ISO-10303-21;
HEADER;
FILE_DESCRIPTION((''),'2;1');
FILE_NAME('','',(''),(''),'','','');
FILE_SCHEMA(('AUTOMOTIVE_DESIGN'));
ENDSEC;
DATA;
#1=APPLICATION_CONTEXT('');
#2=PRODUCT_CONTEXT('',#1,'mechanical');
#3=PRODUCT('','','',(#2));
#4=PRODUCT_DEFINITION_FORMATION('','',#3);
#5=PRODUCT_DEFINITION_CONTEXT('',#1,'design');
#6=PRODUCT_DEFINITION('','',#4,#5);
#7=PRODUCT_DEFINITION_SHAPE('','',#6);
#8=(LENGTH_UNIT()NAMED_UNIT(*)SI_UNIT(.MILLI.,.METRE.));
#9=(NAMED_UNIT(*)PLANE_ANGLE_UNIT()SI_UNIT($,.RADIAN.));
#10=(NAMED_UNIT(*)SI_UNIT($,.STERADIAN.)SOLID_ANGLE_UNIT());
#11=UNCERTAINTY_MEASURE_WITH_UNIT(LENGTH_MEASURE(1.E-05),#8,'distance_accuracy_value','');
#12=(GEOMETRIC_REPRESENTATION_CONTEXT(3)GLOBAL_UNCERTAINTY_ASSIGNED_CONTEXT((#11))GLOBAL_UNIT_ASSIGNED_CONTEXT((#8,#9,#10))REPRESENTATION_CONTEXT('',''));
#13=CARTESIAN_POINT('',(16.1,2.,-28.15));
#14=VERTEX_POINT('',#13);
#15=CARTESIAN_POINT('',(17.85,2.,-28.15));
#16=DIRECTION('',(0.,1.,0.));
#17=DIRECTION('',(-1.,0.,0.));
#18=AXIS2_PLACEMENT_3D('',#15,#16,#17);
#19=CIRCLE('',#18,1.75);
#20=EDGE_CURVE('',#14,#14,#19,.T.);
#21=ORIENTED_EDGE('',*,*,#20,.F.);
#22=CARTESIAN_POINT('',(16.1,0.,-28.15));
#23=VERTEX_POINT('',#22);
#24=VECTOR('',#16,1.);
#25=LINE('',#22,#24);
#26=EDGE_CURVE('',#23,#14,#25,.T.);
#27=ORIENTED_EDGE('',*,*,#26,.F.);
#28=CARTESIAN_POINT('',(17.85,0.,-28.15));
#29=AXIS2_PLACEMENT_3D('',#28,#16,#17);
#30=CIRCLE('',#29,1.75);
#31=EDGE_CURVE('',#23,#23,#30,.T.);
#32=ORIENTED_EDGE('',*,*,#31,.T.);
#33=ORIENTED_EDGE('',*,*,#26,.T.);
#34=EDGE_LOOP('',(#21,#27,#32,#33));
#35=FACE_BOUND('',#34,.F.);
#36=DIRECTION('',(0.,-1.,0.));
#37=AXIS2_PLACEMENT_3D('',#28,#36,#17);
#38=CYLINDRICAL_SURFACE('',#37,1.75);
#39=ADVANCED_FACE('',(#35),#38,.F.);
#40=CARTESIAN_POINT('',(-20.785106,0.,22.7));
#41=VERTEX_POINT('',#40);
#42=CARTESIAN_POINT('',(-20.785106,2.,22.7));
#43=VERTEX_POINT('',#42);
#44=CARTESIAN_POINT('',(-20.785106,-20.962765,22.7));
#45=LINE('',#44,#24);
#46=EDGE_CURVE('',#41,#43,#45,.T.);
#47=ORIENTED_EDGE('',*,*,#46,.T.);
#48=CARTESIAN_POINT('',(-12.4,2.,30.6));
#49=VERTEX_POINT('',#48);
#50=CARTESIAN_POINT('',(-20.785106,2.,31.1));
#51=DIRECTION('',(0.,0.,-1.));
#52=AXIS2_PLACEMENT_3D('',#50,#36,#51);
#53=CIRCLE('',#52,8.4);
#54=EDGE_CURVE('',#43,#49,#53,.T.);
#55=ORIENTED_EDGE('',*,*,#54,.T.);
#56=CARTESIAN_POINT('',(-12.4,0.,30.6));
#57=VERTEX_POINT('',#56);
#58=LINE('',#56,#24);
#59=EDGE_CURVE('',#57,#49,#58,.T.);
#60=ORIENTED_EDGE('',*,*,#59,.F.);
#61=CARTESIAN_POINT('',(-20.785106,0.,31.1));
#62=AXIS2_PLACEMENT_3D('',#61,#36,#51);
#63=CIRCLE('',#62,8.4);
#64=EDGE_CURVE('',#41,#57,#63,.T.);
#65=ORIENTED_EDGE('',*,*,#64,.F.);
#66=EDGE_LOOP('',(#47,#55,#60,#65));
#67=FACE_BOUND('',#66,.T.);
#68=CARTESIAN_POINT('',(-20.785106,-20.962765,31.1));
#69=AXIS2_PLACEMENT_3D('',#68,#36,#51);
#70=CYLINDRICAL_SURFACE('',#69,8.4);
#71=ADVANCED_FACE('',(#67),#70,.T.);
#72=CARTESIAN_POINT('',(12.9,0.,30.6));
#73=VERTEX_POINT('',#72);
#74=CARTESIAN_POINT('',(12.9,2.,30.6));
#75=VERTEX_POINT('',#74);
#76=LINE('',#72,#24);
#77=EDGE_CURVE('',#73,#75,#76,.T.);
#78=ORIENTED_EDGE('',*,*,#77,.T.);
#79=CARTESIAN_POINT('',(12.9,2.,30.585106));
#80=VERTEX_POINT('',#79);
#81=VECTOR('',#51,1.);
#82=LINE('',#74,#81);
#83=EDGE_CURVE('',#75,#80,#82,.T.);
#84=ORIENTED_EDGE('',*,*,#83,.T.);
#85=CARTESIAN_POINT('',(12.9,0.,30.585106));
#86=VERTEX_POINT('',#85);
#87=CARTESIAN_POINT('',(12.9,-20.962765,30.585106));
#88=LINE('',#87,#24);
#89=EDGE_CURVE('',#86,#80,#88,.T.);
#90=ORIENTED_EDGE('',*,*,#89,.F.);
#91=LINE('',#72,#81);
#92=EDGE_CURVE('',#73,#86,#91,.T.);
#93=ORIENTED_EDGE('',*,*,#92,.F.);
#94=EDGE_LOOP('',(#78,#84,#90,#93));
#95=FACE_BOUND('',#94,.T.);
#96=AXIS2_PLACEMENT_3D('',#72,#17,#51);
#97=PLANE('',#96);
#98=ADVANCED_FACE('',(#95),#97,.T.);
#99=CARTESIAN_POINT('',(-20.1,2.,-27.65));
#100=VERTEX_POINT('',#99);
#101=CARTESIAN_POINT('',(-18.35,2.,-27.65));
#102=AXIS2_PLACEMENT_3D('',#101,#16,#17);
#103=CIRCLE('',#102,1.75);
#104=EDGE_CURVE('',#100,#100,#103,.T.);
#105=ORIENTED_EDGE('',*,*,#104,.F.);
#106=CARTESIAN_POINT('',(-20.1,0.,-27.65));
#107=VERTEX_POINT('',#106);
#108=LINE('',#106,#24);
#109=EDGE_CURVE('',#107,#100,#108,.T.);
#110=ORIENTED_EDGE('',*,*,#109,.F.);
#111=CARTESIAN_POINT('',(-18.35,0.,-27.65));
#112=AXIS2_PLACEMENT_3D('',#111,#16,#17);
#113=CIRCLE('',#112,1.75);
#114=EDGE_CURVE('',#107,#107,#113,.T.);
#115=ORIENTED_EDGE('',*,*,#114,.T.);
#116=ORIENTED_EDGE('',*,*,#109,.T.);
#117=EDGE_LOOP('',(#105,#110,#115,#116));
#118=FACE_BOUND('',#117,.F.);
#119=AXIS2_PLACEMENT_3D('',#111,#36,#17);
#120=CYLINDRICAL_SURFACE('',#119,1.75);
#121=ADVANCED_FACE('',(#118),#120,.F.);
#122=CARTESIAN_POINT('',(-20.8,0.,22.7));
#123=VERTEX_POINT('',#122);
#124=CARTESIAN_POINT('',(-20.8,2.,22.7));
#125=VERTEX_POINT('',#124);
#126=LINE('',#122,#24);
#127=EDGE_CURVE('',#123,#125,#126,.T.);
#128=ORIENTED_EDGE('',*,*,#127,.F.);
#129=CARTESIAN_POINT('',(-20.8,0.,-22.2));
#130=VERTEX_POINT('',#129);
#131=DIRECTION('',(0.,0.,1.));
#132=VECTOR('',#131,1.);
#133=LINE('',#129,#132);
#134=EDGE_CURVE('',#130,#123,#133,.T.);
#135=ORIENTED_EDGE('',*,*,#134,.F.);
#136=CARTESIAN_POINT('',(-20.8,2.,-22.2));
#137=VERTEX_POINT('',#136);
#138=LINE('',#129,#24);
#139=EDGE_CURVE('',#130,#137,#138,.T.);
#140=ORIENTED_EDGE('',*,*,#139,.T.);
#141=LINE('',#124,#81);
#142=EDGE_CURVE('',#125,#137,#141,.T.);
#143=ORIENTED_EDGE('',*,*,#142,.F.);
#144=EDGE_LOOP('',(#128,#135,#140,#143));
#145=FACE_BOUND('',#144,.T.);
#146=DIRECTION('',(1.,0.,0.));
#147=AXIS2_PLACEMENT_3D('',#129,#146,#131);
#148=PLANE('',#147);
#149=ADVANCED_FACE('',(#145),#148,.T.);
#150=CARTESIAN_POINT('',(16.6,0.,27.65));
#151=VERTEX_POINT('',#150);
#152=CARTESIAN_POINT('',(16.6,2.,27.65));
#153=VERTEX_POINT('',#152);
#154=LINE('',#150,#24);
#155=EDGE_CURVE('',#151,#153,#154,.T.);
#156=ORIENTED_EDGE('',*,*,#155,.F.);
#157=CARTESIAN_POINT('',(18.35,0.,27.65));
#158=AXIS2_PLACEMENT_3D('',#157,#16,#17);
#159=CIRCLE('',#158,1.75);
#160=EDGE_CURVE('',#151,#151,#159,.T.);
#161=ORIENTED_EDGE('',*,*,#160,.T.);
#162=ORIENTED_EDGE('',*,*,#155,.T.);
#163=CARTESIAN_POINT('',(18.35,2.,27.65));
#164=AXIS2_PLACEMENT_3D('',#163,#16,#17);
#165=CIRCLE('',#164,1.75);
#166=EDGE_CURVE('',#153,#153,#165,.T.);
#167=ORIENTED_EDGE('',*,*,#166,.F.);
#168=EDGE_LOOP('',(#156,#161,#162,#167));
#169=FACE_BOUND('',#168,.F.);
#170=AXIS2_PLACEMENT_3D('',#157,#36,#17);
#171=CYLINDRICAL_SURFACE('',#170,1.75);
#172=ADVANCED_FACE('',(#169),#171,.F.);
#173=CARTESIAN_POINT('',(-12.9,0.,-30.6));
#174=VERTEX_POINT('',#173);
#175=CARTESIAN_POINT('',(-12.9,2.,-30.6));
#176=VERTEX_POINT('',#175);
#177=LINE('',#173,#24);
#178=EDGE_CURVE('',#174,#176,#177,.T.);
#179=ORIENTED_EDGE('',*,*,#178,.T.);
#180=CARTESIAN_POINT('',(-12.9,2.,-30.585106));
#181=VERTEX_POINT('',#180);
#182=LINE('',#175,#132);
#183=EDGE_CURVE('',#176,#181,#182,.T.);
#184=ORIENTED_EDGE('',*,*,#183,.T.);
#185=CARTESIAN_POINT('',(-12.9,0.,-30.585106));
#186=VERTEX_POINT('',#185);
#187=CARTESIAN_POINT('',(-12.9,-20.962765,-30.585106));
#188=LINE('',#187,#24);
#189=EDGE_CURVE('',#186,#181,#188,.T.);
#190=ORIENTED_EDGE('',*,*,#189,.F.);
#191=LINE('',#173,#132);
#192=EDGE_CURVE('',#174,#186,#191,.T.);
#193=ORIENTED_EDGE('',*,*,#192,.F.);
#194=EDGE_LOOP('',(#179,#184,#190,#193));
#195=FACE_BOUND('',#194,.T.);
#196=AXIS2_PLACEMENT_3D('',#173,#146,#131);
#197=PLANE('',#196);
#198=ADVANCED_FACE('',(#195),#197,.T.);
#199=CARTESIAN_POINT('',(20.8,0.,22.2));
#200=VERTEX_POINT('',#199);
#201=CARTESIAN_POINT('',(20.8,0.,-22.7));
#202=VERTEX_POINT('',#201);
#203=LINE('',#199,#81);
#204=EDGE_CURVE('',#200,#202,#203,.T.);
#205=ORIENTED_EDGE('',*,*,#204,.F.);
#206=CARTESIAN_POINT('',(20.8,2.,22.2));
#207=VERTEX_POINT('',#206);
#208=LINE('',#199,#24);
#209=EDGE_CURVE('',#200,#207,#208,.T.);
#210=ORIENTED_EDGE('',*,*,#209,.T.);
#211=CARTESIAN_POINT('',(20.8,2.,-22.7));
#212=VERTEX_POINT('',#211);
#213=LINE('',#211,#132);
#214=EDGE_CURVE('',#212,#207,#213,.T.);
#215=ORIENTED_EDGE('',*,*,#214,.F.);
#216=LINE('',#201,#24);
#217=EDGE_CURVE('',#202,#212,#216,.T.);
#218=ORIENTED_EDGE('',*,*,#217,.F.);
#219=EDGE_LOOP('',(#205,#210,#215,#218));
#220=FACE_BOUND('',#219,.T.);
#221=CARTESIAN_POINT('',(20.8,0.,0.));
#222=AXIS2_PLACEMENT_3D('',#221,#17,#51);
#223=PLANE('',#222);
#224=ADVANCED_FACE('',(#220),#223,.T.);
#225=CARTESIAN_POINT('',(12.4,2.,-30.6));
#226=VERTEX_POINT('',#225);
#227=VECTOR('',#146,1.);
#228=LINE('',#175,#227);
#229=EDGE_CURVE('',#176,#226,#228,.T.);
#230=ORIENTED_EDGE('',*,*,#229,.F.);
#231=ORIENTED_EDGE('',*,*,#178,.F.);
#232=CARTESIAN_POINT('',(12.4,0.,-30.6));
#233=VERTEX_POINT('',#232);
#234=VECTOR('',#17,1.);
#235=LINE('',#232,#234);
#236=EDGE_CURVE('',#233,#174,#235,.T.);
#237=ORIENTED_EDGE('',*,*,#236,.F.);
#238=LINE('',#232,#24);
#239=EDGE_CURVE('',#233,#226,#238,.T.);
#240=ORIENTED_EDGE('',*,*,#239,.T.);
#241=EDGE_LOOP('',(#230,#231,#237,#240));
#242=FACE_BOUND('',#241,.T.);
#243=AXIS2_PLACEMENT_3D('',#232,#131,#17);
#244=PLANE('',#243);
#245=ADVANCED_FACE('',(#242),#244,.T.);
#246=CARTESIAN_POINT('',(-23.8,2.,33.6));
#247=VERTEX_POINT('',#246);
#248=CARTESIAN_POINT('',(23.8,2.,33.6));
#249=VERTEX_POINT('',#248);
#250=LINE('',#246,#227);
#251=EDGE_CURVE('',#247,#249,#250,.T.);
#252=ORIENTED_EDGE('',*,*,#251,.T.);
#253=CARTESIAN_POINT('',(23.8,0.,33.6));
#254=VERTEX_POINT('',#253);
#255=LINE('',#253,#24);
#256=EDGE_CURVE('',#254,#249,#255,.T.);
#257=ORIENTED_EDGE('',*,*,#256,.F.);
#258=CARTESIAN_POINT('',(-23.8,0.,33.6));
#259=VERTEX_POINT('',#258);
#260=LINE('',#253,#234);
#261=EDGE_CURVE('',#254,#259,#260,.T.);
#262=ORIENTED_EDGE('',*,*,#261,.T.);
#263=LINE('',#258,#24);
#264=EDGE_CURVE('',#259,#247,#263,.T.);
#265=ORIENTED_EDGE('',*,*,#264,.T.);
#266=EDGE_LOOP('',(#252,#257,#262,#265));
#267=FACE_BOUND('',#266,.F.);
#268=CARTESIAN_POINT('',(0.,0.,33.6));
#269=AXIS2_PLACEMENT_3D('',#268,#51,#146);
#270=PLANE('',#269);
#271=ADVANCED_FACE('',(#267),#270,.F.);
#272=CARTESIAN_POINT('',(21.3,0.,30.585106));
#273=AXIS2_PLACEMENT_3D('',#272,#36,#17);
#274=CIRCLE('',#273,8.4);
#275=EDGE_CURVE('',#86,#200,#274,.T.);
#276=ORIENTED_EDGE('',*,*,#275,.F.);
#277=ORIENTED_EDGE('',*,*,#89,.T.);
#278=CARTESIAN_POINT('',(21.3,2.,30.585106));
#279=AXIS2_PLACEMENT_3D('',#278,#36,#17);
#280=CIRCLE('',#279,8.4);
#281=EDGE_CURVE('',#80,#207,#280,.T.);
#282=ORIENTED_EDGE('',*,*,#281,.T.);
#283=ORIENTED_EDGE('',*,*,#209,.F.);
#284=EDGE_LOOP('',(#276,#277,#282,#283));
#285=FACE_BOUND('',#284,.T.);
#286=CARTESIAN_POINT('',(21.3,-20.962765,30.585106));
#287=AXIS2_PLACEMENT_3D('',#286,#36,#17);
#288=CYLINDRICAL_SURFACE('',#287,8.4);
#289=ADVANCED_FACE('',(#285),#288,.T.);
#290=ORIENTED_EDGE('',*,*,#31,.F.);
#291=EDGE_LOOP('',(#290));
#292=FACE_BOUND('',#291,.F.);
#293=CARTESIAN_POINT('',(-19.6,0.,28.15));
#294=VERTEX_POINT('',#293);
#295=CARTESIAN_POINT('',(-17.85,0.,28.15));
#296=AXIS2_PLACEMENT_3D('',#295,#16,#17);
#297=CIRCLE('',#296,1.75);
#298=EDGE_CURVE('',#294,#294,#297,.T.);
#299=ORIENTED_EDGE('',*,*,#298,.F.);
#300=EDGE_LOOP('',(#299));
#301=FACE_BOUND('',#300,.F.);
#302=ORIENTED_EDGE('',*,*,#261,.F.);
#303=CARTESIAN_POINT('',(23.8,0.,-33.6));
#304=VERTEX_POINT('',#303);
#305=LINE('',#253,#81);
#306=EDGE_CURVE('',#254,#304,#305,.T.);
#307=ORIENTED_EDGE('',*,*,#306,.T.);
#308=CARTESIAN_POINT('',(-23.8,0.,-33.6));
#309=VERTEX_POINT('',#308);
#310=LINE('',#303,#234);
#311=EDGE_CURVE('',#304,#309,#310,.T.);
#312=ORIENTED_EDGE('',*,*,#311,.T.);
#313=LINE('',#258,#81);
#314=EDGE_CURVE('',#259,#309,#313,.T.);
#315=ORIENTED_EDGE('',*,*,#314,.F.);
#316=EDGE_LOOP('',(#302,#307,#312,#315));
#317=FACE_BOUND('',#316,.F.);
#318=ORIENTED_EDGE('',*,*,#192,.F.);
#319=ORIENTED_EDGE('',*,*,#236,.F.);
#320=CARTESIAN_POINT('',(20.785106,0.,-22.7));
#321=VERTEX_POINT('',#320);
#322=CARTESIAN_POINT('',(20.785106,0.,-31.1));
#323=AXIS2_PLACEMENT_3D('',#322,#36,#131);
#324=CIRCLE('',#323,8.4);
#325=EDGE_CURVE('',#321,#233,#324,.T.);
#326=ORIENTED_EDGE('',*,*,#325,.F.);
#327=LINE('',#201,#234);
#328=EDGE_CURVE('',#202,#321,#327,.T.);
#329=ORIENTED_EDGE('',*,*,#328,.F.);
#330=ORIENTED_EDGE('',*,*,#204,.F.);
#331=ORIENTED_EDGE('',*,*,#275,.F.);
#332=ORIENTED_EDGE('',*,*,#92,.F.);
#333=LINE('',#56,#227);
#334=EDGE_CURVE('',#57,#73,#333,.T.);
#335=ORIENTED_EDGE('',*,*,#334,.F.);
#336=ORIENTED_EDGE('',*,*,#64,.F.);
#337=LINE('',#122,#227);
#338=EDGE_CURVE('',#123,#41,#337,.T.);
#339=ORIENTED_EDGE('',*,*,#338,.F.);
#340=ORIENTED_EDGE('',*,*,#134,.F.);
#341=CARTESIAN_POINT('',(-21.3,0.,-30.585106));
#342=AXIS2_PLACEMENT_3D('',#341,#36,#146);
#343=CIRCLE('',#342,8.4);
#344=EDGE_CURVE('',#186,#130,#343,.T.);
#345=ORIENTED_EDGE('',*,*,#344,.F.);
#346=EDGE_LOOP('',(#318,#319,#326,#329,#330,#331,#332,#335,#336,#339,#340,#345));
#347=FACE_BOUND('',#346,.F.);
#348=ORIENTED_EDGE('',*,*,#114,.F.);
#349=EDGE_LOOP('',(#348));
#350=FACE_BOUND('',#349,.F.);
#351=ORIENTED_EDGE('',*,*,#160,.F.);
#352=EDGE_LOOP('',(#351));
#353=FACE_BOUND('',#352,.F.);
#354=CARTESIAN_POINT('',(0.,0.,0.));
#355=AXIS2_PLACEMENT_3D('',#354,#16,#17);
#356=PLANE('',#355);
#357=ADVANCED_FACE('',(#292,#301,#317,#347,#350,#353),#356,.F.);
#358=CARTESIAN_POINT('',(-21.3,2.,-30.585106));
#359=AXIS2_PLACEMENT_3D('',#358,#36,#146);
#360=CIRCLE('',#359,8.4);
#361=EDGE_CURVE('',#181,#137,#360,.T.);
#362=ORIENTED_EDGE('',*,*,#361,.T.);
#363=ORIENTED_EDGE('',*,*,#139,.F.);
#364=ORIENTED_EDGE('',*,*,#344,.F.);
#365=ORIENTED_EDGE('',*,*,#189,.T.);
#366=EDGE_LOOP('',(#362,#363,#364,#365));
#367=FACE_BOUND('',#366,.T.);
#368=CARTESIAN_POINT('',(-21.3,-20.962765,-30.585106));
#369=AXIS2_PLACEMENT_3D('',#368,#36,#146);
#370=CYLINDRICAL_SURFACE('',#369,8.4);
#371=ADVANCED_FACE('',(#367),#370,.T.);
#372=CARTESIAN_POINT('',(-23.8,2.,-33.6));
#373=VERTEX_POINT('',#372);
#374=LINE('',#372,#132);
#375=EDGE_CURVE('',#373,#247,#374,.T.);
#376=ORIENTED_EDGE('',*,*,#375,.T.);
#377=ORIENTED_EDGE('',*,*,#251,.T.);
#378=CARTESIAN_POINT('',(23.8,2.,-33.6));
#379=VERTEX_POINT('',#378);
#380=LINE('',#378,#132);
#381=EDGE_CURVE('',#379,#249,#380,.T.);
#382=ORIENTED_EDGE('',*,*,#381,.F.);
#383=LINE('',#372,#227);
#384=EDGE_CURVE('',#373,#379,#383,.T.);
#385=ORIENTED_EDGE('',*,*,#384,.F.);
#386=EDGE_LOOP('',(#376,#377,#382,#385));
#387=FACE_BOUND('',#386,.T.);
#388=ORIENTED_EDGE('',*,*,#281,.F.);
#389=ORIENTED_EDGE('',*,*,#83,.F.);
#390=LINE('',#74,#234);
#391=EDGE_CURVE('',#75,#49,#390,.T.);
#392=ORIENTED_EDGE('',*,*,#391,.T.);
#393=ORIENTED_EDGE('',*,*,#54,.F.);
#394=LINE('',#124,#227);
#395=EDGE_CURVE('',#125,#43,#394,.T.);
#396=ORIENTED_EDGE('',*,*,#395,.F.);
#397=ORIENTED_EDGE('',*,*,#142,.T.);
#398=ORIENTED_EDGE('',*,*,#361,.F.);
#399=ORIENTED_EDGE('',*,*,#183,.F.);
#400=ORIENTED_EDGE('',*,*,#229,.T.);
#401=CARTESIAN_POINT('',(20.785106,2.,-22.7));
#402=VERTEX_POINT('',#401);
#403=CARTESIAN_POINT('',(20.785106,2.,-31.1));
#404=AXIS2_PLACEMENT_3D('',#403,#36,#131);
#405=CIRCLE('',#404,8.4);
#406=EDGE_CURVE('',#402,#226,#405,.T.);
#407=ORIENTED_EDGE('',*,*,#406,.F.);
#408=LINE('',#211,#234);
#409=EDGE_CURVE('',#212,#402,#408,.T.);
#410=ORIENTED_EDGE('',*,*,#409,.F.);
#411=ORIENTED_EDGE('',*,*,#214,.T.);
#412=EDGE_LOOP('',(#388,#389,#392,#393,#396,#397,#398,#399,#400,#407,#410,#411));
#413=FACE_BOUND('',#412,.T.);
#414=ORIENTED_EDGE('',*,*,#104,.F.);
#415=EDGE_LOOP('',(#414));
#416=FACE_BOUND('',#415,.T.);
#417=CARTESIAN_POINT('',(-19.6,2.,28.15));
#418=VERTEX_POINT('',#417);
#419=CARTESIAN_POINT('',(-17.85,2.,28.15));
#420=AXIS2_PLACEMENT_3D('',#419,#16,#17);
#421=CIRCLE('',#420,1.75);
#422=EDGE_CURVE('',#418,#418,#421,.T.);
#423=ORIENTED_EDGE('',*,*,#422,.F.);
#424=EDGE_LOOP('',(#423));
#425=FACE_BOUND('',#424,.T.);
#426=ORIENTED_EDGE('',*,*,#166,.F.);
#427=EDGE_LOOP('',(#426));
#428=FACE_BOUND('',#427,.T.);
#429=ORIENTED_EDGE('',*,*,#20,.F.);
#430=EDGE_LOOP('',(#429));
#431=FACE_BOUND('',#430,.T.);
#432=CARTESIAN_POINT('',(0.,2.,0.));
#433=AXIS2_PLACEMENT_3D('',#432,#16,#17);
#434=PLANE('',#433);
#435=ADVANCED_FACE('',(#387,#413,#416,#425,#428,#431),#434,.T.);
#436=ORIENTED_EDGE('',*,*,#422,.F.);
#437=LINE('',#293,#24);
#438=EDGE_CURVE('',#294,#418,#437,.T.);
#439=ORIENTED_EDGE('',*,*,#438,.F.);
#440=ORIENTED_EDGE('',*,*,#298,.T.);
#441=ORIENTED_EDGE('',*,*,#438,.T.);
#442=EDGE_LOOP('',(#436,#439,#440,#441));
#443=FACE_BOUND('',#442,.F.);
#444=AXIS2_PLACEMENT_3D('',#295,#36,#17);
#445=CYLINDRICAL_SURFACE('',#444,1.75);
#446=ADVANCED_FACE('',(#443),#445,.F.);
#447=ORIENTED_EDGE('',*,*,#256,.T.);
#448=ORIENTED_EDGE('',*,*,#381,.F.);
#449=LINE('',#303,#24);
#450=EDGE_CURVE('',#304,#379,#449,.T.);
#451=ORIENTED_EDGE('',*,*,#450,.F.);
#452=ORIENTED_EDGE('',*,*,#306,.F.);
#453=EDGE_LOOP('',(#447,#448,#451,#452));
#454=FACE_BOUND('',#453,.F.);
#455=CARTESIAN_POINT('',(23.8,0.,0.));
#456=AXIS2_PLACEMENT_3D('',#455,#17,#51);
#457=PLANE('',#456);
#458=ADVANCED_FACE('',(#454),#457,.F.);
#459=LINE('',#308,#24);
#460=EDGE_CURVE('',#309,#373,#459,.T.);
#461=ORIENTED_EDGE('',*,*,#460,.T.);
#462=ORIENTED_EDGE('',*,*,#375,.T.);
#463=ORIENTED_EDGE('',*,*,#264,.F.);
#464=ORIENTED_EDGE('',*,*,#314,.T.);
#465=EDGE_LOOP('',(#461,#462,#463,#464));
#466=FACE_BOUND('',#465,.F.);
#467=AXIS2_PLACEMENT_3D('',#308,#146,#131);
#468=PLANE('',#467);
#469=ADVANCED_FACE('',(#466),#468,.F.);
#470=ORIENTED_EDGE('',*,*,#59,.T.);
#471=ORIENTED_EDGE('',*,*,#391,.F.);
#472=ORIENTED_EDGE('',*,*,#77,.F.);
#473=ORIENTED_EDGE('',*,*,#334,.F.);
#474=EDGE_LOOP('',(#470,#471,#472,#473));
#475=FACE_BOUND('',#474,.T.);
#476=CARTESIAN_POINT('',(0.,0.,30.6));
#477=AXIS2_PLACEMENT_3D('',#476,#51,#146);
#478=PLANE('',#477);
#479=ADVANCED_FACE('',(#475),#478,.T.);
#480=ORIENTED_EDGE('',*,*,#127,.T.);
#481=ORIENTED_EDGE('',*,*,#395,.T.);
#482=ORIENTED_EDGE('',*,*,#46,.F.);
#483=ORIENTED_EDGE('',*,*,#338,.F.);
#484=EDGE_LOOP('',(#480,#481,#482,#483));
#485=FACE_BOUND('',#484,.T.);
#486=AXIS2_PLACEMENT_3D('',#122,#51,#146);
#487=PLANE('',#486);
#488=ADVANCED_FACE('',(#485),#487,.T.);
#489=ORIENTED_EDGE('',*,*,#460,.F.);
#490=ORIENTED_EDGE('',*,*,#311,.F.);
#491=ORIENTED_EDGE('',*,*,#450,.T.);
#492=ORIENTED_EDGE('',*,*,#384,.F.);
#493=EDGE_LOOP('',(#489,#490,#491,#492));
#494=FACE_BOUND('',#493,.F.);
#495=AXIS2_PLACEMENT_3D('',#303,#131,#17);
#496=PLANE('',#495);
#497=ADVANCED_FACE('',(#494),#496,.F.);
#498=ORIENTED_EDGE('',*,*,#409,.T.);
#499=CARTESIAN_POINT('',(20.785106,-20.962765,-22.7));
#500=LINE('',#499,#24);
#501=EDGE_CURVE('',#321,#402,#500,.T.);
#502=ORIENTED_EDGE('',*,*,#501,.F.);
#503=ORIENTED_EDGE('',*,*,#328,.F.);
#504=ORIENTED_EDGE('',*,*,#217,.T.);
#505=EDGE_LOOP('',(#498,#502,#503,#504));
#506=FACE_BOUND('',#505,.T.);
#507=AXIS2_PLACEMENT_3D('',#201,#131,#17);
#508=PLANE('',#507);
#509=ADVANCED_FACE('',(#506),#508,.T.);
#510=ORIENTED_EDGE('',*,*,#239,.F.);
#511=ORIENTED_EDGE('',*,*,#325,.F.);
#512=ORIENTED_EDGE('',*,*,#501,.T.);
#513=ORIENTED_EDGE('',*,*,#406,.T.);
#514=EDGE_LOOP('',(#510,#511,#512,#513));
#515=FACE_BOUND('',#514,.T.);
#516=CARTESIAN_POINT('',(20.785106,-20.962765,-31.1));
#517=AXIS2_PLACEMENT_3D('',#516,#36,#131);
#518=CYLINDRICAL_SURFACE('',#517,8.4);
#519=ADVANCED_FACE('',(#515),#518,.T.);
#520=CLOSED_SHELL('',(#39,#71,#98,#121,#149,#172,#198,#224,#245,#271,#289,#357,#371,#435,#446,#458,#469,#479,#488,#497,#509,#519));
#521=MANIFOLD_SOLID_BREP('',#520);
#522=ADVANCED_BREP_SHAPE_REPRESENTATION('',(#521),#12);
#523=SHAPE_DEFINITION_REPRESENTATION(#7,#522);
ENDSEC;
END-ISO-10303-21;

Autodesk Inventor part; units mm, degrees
ref_plane "YZ Plane" through (0, 0, 0) normal (1, 0, 0) x (0, 1, 0)
ref_plane "XZ Plane" through (0, 0, 0) normal (0, 1, 0) x (-1, 0, 0)
ref_plane "XY Plane" through (0, 0, 0) normal (0, 0, 1) x (1, 0, 0)
sketch "Boceto1" plane through (0, 0, 0) normal (0, 1, 0) x (-1, 0, 0)
  line L0 (-23.8, -33.6) -> (23.8, -33.6)
  line L1 (23.8, -33.6) -> (23.8, 33.6)
  line L2 (23.8, 33.6) -> (-23.8, 33.6)
  line L3 (-23.8, 33.6) -> (-23.8, -33.6)
  line L4 (-12.4, -30.6) -> (12.9, -30.6)
  line L5 (12.4, 30.6) -> (-12.9, 30.6)
  line L6 (-23.8, 33.6) -> (-23.8, 29.4)
  circle A0 centre (-18.35, 27.65) radius 1.75
  line L7 (-16.6, 29.4) -> (-20.1, 25.9) construction
  line L8 (-20.1, 29.4) -> (-16.6, 25.9) construction
  line L9 (-12.9, 22.2) -> (-20.8, 22.2)
  line L10 (-23.8, 22.2) -> (-23.8, 33.1)
  line L11 (-12.9, 30.6) -> (-12.9, 22.2)
  line L12 (0, 33.6) -> (0, -33.6)
  line L13 (-23.8, 0) -> (23.8, 0)
  circle A1 centre (-17.85, -28.15) radius 1.75
  line L14 (-19.6, -26.4) -> (-16.1, -29.9) construction
  line L15 (-19.6, -29.9) -> (-16.1, -26.4) construction
  line L16 (-12.4, -22.7) -> (-12.4, -30.6)
  line L17 (-20.8, -22.7) -> (-12.4, -22.7)
  circle A2 centre (18.35, -27.65) radius 1.75
  line L18 (16.6, -29.4) -> (20.1, -25.9) construction
  line L19 (12.9, -22.2) -> (20.8, -22.2)
  line L20 (12.9, -30.6) -> (12.9, -22.2)
  circle A3 centre (17.85, 28.15) radius 1.75
  line L21 (19.6, 26.4) -> (16.1, 29.9) construction
  line L22 (19.6, 29.9) -> (16.1, 26.4) construction
  line L23 (12.4, 22.7) -> (12.4, 30.6)
  line L24 (20.8, 22.7) -> (12.4, 22.7)
  line L25 (20.8, -22.2) -> (20.8, 22.7)
  line L26 (-20.8, 22.2) -> (-20.8, -22.7)
  point P0 (0, 0)
  dimension "d0" = 47.6
  dimension "d1" = 67.2
  dimension "d3" = 4.2
  dimension "d5" = 3.5
  dimension "d9" = 3.5
  dimension "d11" = 3.5
extrude "Extrusión1" add sketch "Boceto1" along normal blind 2 contours L3 L13 L26 L17 L16 L4 L12 L0 | L12 L4 L20 L19 L25 L13 L1 L0 | L3 L2 L12 L5 L11 L9 L26 L13 | L13 L25 L24 L23 L5 L12 L2 L1
fillet "Empalme1" radius 8.4 4 edges at (-12.4, 1, 22.7) (12.9, 1, 22.2) (12.4, 1, -22.7) (-12.9, 1, -22.2)
